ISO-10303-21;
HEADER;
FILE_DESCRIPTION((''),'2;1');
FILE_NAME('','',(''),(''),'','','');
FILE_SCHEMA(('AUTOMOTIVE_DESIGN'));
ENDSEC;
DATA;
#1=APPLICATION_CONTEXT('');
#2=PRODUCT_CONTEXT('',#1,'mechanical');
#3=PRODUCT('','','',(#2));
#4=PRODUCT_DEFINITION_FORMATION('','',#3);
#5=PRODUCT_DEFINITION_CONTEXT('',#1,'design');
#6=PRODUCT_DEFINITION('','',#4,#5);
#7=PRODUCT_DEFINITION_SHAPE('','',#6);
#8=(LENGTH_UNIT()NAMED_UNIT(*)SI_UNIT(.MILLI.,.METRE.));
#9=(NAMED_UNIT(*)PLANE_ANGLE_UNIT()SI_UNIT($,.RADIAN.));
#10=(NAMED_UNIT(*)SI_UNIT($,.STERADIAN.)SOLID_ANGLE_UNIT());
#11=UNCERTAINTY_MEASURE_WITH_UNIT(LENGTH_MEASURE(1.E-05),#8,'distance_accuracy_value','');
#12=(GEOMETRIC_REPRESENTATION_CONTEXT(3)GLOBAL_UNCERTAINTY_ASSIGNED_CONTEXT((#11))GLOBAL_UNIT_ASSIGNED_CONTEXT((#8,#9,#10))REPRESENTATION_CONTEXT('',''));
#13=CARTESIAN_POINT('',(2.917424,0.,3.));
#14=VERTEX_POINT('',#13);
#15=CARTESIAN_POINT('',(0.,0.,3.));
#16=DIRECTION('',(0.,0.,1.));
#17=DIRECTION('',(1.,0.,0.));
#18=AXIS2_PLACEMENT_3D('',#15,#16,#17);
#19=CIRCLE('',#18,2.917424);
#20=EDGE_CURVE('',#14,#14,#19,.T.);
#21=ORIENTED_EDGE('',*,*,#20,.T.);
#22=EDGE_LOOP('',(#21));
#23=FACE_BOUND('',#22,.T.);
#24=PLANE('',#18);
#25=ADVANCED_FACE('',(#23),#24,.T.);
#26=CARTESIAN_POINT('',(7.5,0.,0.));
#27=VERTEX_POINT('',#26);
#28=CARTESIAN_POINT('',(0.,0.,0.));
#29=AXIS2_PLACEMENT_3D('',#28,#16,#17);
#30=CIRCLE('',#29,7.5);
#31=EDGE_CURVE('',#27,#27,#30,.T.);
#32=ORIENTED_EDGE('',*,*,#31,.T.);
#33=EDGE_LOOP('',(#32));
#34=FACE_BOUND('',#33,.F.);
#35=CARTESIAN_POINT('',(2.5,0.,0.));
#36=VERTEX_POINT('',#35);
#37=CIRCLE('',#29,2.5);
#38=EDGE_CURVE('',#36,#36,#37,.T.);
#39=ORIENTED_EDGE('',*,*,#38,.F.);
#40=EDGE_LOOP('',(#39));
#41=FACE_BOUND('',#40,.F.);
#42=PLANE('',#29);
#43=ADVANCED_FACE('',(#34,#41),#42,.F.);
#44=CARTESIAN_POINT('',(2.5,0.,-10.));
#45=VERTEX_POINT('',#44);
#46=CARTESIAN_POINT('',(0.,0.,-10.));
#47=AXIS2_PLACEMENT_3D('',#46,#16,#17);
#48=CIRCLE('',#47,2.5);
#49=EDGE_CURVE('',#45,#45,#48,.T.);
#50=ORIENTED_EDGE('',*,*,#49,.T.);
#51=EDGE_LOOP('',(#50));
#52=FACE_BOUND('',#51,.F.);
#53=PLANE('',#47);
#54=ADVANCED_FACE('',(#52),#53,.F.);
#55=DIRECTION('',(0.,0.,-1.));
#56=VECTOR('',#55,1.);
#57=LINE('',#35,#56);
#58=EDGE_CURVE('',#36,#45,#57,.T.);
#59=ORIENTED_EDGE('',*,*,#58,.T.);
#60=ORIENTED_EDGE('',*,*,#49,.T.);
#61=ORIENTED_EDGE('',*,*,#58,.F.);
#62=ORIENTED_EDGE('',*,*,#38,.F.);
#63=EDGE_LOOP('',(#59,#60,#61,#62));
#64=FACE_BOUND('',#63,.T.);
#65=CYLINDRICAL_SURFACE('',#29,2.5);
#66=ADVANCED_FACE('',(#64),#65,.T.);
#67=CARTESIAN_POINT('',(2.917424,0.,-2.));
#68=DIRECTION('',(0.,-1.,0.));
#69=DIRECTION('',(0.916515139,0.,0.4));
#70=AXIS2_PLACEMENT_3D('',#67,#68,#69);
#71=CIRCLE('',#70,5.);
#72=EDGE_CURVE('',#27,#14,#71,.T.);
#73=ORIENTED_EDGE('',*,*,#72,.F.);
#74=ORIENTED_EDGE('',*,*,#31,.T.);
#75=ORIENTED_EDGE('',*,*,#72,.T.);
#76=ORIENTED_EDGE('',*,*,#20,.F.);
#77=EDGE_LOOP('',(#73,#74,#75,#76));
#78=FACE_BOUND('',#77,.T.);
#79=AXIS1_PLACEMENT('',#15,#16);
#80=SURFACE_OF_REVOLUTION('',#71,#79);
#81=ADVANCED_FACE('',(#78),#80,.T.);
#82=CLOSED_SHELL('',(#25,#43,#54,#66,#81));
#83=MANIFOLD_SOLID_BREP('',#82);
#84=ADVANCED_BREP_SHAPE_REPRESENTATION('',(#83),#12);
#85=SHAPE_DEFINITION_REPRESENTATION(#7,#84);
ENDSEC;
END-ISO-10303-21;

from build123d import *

# Parameters (mm, degrees)
F0_R     = 7.5
F1_DEPTH = 3
F3_R     = 2.5
F4_DEPTH = 10


# Not quite as in the source:
# - a fillet or chamfer that OpenCascade refuses, or shapes differently, is made with other operations: its cross-section is extruded or revolved along the edge and cut away or added


with BuildPart() as f1:
    # F0 (on Top) → F1 (new body)
    with BuildSketch(Plane.XY):
        Circle(F0_R)
    extrude(amount=F1_DEPTH)

    # F2: fillet of radius 5 on 1 edges, made by hand

    # F2_s1 → F2_t2 (revolve, cut)
    with BuildSketch(Plane.XZ):
        with BuildLine():
            ThreePointArc((7.5, 0), (5.6560370926, 2.1833001327), (2.917424305, 3))
            Line((2.917424305, 3), (7.5, 3))
            Line((7.5, 3), (7.5, 0))
        make_face()
    revolve(axis=Axis((0, 0, 3), (0, 0, 1)), mode=Mode.SUBTRACT)

    # F3 (on Top) → F4 (join)
    with BuildSketch(Plane.XY):
        Circle(F3_R)
    extrude(amount=-F4_DEPTH)


solid = f1.part
